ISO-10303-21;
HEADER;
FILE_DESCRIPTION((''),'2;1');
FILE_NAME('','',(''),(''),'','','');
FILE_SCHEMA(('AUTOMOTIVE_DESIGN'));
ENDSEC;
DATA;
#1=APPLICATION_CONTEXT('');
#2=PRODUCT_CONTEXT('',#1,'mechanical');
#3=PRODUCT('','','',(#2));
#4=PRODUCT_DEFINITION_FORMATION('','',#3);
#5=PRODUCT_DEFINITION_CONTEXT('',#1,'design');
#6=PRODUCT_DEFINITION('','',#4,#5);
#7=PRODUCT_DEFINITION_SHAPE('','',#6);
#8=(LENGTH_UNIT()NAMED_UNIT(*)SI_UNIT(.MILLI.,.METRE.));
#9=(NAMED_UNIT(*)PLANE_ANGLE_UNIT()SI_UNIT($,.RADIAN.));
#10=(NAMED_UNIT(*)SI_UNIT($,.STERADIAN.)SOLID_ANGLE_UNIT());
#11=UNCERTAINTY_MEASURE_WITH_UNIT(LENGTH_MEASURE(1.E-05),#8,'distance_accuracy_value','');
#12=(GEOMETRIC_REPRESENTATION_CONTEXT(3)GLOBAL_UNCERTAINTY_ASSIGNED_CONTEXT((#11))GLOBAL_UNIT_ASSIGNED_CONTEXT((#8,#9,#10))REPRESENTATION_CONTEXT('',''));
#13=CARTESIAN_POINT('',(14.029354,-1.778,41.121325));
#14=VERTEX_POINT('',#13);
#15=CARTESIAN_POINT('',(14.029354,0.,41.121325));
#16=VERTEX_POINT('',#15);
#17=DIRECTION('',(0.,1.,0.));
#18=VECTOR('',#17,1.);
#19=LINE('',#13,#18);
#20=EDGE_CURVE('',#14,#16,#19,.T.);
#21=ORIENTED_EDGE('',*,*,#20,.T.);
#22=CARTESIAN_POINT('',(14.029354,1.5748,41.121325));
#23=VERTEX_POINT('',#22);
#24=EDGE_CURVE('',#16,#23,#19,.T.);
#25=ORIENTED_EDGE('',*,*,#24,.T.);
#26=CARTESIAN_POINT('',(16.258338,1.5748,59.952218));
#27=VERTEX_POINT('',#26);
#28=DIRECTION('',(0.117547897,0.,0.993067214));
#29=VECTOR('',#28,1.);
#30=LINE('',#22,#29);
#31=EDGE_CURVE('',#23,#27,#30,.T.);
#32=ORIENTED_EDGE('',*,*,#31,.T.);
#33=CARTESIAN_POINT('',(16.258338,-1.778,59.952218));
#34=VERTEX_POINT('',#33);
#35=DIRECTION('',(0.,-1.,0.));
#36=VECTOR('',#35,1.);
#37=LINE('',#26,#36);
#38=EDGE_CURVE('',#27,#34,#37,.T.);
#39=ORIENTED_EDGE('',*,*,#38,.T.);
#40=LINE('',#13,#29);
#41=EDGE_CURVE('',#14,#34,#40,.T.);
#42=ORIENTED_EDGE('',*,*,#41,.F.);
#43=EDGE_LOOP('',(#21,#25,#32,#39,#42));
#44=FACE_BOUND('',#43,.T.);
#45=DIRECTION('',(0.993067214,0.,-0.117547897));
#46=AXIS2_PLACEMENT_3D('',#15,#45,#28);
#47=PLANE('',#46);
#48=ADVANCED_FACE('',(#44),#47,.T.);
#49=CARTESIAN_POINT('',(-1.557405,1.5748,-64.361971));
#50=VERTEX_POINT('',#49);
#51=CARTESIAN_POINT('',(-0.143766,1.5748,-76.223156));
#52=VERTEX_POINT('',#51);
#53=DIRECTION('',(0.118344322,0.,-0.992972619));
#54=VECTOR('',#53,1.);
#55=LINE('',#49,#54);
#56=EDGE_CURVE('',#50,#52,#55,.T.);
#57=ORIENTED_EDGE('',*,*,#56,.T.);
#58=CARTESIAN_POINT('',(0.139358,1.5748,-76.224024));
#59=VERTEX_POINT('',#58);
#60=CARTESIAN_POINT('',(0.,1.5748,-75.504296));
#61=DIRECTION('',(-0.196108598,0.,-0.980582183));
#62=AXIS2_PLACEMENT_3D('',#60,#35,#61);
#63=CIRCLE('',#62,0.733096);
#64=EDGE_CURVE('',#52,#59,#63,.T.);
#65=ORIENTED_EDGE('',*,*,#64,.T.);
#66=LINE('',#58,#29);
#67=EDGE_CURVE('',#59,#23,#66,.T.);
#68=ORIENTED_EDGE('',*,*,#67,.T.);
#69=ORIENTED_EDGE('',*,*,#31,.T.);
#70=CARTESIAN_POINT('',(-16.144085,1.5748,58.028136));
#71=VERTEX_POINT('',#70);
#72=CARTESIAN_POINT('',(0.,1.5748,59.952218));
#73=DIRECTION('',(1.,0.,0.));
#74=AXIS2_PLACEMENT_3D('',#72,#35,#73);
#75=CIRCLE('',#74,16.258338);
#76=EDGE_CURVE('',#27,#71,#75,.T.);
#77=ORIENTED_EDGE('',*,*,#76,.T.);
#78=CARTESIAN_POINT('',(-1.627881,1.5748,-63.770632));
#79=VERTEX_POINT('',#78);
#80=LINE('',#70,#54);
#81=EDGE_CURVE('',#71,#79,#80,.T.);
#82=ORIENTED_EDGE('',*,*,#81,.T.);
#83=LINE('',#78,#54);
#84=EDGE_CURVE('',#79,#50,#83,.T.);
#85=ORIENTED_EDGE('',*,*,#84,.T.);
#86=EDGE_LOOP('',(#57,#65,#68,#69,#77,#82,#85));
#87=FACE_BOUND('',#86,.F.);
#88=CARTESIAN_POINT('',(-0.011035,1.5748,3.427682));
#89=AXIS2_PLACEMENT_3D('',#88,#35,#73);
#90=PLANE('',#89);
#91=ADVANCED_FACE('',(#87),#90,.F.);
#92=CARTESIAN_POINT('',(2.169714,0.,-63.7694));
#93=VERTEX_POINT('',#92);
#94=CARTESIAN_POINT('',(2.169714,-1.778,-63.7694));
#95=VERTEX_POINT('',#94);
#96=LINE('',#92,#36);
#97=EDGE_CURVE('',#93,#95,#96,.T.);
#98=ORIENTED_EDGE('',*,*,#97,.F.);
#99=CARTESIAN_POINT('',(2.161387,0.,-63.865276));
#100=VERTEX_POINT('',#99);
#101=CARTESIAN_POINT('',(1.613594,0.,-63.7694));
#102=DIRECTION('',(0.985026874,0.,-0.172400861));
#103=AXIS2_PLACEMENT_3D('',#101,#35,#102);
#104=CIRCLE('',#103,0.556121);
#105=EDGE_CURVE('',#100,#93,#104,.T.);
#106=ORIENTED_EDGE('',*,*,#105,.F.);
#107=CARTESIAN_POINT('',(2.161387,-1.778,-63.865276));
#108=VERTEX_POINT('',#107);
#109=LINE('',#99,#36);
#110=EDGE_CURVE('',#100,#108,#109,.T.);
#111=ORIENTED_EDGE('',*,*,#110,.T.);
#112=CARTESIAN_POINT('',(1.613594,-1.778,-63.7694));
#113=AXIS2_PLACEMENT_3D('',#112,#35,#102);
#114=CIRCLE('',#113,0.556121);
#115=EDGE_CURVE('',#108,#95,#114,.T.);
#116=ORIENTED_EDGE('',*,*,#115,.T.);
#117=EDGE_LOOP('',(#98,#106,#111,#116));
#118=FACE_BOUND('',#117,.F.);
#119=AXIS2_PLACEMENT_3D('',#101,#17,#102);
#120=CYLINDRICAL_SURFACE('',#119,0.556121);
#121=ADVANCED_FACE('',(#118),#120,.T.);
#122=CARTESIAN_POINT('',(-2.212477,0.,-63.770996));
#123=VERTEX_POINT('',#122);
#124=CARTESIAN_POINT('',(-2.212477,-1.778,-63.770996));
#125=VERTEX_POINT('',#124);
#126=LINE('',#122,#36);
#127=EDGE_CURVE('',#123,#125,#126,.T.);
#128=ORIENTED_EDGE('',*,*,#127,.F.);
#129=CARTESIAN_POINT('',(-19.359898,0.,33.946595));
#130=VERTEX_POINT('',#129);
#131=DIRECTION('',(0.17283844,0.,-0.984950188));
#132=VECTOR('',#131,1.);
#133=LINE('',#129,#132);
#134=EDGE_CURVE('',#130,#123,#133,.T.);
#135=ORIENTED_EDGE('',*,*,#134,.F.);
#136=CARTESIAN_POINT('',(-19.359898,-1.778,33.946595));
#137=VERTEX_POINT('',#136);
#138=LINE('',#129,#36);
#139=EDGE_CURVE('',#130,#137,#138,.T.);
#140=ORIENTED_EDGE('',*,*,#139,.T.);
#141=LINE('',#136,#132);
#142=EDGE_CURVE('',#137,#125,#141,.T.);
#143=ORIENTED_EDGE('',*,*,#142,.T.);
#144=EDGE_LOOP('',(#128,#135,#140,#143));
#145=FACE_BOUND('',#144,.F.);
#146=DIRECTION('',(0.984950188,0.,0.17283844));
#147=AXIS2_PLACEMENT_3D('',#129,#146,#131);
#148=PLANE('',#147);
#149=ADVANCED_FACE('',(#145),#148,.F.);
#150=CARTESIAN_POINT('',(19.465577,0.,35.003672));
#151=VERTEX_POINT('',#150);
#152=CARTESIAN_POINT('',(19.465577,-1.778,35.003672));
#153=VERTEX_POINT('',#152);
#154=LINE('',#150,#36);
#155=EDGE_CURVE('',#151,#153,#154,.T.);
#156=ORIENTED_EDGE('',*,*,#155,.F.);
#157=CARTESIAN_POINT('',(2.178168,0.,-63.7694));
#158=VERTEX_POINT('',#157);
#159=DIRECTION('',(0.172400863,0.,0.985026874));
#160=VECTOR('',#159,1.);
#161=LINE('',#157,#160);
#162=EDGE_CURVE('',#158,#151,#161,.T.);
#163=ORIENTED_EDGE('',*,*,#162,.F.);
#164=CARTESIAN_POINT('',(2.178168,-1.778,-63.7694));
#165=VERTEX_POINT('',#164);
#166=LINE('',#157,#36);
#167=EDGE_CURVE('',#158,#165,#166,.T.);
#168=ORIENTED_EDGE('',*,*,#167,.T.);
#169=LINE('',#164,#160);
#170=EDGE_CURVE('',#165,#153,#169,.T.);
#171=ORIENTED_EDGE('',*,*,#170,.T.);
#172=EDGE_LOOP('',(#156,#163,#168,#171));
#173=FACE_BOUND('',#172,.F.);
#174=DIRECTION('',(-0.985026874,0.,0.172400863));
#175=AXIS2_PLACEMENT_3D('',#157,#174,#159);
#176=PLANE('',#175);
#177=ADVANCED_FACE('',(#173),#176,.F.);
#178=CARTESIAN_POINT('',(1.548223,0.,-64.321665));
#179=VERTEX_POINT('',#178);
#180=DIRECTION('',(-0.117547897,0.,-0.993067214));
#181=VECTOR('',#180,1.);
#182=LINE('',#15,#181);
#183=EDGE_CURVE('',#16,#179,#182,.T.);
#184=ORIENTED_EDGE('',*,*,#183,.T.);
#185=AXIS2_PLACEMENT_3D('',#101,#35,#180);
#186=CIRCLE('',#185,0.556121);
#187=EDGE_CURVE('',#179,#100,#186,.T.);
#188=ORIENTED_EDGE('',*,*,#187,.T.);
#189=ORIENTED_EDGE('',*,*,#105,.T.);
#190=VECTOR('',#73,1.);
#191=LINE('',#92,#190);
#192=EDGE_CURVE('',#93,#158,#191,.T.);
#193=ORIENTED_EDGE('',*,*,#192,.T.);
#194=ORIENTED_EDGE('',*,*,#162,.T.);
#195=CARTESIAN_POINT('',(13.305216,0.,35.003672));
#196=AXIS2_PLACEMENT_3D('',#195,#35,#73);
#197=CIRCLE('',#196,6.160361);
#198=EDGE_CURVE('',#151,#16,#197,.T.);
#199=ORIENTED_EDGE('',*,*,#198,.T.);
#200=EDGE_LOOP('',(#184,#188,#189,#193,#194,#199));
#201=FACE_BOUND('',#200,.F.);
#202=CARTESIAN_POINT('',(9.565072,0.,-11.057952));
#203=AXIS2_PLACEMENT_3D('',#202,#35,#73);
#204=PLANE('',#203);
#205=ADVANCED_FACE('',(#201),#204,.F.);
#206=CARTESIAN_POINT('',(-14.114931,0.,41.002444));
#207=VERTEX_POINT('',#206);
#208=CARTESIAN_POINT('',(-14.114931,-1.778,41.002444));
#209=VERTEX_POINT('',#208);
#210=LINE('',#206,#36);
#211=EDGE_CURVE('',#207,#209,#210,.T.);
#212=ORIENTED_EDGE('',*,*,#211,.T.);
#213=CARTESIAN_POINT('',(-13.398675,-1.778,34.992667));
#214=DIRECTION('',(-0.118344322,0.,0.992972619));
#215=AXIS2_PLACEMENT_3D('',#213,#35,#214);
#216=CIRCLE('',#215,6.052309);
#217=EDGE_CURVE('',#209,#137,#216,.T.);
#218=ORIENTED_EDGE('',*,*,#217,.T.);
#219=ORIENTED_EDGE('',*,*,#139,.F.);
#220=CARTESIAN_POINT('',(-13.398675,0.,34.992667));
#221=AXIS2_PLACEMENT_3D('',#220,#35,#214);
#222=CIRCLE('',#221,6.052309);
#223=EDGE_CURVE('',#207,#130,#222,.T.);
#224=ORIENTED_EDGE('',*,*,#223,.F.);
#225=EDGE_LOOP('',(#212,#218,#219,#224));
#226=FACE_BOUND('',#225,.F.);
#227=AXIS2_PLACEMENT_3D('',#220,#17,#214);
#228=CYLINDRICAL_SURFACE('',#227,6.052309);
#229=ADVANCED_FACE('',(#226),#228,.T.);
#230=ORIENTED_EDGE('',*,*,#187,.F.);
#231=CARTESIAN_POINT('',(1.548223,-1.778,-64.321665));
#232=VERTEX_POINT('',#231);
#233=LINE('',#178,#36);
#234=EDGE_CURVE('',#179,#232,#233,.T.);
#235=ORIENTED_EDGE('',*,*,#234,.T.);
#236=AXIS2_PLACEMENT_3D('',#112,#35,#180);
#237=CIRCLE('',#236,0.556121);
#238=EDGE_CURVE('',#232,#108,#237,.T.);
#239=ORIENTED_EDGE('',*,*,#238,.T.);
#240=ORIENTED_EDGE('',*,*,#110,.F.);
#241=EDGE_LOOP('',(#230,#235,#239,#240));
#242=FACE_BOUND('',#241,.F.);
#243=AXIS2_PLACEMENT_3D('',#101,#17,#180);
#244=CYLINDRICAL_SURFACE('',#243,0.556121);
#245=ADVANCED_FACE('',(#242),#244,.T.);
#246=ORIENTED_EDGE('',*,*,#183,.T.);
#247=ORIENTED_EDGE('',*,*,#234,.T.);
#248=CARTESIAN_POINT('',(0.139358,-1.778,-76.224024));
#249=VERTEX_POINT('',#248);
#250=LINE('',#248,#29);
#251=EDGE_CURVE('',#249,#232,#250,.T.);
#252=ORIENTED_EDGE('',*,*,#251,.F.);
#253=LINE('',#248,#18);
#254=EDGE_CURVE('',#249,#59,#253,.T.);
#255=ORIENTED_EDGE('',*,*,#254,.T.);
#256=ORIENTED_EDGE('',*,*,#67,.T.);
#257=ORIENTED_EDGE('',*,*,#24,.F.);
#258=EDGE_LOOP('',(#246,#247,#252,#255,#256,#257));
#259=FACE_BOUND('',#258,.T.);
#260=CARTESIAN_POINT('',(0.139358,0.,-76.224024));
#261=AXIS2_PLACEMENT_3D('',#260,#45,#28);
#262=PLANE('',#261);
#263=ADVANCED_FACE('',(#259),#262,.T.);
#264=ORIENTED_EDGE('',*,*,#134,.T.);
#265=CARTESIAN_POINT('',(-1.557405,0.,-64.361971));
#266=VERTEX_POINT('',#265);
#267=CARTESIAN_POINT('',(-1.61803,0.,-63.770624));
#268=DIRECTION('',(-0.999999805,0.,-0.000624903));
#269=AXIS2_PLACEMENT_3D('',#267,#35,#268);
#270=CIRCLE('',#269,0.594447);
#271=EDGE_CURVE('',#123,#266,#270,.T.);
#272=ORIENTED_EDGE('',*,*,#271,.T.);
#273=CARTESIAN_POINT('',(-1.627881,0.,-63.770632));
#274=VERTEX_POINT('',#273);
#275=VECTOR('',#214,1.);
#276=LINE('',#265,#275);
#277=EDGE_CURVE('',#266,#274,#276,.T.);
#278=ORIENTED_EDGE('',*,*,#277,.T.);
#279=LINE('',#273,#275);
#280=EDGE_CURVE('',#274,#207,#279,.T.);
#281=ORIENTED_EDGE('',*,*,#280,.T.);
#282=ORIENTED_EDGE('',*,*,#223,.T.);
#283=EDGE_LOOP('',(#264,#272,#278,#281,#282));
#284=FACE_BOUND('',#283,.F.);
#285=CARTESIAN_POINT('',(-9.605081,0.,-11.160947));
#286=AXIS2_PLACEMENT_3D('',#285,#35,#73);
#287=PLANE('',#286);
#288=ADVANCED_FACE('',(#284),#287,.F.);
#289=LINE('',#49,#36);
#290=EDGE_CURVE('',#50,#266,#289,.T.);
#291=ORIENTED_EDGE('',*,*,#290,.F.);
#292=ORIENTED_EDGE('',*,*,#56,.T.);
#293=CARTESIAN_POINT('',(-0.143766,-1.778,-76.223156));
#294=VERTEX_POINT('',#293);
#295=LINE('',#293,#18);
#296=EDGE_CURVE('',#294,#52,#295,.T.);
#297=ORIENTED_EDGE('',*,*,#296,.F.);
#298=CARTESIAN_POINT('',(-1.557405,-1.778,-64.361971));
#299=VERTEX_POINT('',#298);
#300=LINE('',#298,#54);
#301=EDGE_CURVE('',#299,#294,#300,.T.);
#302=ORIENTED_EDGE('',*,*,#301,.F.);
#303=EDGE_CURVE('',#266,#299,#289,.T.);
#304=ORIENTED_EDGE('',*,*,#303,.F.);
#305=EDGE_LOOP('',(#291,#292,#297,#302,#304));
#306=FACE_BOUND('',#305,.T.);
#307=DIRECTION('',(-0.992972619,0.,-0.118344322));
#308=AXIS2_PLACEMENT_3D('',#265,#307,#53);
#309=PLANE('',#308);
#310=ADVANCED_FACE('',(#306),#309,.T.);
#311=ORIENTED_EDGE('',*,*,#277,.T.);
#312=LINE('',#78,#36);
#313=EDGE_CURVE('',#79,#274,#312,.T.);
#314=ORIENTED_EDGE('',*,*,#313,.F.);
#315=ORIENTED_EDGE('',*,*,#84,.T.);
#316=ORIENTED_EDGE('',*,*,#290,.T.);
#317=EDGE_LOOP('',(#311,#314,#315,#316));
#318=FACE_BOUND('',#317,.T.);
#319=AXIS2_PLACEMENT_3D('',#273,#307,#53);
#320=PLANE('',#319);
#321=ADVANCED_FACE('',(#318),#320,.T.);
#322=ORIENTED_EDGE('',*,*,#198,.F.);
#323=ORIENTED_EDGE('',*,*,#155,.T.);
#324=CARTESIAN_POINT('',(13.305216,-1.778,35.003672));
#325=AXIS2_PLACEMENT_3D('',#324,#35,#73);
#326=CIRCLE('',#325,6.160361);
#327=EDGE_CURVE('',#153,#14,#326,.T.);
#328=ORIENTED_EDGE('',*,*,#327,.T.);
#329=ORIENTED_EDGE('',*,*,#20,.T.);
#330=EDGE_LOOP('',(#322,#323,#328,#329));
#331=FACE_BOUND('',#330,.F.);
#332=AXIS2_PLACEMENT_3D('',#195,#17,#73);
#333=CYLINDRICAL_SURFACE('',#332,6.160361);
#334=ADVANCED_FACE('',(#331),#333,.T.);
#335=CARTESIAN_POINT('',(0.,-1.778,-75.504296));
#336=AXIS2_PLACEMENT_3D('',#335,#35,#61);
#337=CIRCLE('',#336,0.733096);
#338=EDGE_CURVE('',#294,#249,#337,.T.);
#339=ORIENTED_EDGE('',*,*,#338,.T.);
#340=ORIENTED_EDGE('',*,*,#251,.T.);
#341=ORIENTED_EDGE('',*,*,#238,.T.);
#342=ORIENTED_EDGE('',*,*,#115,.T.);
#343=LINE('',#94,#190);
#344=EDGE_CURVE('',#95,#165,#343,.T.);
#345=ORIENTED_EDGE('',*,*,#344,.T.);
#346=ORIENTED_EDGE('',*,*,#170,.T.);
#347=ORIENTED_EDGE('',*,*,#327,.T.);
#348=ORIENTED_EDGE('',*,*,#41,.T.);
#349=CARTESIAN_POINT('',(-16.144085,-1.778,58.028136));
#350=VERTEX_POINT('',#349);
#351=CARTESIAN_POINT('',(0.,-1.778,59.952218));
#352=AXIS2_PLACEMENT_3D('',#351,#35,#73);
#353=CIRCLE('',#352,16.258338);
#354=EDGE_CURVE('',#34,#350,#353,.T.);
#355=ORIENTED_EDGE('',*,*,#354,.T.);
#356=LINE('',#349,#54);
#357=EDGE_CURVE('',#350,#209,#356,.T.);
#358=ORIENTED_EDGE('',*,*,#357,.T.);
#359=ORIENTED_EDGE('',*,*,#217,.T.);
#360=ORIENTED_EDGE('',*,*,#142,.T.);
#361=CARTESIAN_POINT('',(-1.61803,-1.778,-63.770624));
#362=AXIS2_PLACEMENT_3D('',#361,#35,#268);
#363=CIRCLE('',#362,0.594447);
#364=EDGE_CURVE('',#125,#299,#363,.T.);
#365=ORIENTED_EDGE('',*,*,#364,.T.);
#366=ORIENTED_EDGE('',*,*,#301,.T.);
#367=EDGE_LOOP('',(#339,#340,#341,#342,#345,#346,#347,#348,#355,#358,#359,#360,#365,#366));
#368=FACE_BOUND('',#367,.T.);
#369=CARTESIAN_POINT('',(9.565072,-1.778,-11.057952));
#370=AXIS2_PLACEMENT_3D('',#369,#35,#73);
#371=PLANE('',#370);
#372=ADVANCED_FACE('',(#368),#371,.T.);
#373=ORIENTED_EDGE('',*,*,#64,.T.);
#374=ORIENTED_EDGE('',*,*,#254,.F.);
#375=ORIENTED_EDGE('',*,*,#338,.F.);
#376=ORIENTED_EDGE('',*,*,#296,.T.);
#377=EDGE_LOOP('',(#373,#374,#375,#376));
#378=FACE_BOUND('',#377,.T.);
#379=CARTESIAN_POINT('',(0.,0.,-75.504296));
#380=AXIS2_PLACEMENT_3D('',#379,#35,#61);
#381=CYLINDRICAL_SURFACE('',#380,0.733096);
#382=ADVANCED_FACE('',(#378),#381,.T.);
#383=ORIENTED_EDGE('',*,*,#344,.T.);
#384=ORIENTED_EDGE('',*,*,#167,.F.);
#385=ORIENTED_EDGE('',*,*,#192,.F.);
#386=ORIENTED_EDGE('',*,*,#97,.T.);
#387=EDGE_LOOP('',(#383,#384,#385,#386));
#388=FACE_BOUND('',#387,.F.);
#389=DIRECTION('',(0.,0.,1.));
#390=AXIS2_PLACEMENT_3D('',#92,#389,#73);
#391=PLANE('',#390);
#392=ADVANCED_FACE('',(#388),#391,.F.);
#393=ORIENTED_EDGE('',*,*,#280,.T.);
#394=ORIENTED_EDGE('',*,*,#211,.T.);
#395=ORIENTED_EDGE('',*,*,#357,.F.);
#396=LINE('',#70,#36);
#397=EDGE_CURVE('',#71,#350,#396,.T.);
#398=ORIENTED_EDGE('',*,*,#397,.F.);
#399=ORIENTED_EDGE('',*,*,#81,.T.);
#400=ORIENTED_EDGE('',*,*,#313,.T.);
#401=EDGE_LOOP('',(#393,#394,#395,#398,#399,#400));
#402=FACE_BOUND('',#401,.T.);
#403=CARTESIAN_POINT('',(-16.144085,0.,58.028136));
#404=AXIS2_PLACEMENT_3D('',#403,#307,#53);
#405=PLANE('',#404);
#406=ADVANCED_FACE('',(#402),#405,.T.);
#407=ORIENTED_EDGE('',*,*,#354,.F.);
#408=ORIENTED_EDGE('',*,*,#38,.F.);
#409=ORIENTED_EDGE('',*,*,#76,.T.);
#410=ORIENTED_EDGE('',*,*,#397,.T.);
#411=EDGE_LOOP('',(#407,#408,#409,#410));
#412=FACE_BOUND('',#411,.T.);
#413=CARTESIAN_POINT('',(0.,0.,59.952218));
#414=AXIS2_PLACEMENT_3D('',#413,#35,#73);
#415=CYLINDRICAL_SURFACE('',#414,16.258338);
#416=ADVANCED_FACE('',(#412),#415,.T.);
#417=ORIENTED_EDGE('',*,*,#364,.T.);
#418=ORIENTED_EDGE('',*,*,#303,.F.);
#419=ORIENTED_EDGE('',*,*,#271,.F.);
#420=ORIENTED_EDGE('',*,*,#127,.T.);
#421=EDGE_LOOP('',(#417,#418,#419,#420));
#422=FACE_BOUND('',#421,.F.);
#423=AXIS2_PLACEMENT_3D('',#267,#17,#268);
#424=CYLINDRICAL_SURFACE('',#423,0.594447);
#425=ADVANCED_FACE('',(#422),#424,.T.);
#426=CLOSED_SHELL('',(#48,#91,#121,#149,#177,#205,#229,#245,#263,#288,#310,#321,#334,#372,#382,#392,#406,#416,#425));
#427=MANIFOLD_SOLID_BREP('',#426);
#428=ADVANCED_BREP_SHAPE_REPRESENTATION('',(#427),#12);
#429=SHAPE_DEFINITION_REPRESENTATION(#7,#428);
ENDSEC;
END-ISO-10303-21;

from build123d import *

# Parameters (mm, degrees)
F1_DEPTH = 1.778
F2_DEPTH = 1.5748
F3_DEPTH = 1.778


with BuildPart() as f1:
    # F0 (on Front) → F1 (new body)
    with BuildSketch(Plane.XZ):
        with BuildLine():
            Line((14.02935353, 41.1213250894), (16.2583384663, 59.9522180855))
            ThreePointArc((16.2583384663, 59.9522180855), (-0.9637356423, 76.1819680311), (-16.1440849231, 58.0281360497))
            Line((-16.1440849231, 58.0281360497), (-14.1149313353, 41.0024441959))
            Line((-14.1149313353, 41.0024441959), (-1.6278814086, -63.7706323678))
            Line((-1.6278814086, -63.7706323678), (-1.5574045531, -64.3619711562))
            Line((-1.5574045531, -64.3619711562), (-0.1437664474, -76.223156493))
            ThreePointArc((-0.1437664474, -76.223156493), (-0.0022464, -76.237388177), (0.1393582085, -76.2240240658))
            Line((0.1393582085, -76.2240240658), (1.5482228022, -64.3216652936))
            Line((1.5482228022, -64.3216652936), (14.02935353, 41.1213250894))
        make_face()
    extrude(amount=F1_DEPTH)

    # F2 (add): a face of the model
    f2_faces = [f1.faces().sort_by_distance(p)[0] for p in [
        (-0.03237785, 0, 22.4036287073),
    ]]
    extrude(f2_faces, amount=F2_DEPTH)

    # F0 (on Front) → F3 (join)
    with BuildSketch(Plane.XZ):
        with BuildLine():
            ThreePointArc((19.465577211, 35.0036723741), (17.9101589408, 39.0956829635), (14.02935353, 41.1213250894))
            Line((14.02935353, 41.1213250894), (1.5482228022, -64.3216652936))
            ThreePointArc((1.5482228022, -64.3216652936), (1.9456415345, -64.2155103566), (2.1613873882, -63.865275798))
            ThreePointArc((2.1613873882, -63.865275798), (2.1676286256, -63.8175184176), (2.1697142526, -63.7694001198))
            Line((2.1697142526, -63.7694001198), (2.1781676915, -63.7694001198))
            Line((2.1781676915, -63.7694001198), (19.465577211, 35.0036723741))
        make_face()
        with BuildLine():
            Line((-1.6278814086, -63.7706323678), (-14.1149313353, 41.0024441959))
            ThreePointArc((-14.1149313353, 41.0024441959), (-18.2559821933, 38.6033472019), (-19.3598979472, 33.9465952648))
            Line((-19.3598979472, 33.9465952648), (-2.2124765092, -63.7709956311))
            ThreePointArc((-2.2124765092, -63.7709956311), (-2.0162187298, -64.2119998537), (-1.5574045531, -64.3619711562))
            Line((-1.5574045531, -64.3619711562), (-1.6278814086, -63.7706323678))
        make_face()
    extrude(amount=F3_DEPTH)


solid = f1.part
